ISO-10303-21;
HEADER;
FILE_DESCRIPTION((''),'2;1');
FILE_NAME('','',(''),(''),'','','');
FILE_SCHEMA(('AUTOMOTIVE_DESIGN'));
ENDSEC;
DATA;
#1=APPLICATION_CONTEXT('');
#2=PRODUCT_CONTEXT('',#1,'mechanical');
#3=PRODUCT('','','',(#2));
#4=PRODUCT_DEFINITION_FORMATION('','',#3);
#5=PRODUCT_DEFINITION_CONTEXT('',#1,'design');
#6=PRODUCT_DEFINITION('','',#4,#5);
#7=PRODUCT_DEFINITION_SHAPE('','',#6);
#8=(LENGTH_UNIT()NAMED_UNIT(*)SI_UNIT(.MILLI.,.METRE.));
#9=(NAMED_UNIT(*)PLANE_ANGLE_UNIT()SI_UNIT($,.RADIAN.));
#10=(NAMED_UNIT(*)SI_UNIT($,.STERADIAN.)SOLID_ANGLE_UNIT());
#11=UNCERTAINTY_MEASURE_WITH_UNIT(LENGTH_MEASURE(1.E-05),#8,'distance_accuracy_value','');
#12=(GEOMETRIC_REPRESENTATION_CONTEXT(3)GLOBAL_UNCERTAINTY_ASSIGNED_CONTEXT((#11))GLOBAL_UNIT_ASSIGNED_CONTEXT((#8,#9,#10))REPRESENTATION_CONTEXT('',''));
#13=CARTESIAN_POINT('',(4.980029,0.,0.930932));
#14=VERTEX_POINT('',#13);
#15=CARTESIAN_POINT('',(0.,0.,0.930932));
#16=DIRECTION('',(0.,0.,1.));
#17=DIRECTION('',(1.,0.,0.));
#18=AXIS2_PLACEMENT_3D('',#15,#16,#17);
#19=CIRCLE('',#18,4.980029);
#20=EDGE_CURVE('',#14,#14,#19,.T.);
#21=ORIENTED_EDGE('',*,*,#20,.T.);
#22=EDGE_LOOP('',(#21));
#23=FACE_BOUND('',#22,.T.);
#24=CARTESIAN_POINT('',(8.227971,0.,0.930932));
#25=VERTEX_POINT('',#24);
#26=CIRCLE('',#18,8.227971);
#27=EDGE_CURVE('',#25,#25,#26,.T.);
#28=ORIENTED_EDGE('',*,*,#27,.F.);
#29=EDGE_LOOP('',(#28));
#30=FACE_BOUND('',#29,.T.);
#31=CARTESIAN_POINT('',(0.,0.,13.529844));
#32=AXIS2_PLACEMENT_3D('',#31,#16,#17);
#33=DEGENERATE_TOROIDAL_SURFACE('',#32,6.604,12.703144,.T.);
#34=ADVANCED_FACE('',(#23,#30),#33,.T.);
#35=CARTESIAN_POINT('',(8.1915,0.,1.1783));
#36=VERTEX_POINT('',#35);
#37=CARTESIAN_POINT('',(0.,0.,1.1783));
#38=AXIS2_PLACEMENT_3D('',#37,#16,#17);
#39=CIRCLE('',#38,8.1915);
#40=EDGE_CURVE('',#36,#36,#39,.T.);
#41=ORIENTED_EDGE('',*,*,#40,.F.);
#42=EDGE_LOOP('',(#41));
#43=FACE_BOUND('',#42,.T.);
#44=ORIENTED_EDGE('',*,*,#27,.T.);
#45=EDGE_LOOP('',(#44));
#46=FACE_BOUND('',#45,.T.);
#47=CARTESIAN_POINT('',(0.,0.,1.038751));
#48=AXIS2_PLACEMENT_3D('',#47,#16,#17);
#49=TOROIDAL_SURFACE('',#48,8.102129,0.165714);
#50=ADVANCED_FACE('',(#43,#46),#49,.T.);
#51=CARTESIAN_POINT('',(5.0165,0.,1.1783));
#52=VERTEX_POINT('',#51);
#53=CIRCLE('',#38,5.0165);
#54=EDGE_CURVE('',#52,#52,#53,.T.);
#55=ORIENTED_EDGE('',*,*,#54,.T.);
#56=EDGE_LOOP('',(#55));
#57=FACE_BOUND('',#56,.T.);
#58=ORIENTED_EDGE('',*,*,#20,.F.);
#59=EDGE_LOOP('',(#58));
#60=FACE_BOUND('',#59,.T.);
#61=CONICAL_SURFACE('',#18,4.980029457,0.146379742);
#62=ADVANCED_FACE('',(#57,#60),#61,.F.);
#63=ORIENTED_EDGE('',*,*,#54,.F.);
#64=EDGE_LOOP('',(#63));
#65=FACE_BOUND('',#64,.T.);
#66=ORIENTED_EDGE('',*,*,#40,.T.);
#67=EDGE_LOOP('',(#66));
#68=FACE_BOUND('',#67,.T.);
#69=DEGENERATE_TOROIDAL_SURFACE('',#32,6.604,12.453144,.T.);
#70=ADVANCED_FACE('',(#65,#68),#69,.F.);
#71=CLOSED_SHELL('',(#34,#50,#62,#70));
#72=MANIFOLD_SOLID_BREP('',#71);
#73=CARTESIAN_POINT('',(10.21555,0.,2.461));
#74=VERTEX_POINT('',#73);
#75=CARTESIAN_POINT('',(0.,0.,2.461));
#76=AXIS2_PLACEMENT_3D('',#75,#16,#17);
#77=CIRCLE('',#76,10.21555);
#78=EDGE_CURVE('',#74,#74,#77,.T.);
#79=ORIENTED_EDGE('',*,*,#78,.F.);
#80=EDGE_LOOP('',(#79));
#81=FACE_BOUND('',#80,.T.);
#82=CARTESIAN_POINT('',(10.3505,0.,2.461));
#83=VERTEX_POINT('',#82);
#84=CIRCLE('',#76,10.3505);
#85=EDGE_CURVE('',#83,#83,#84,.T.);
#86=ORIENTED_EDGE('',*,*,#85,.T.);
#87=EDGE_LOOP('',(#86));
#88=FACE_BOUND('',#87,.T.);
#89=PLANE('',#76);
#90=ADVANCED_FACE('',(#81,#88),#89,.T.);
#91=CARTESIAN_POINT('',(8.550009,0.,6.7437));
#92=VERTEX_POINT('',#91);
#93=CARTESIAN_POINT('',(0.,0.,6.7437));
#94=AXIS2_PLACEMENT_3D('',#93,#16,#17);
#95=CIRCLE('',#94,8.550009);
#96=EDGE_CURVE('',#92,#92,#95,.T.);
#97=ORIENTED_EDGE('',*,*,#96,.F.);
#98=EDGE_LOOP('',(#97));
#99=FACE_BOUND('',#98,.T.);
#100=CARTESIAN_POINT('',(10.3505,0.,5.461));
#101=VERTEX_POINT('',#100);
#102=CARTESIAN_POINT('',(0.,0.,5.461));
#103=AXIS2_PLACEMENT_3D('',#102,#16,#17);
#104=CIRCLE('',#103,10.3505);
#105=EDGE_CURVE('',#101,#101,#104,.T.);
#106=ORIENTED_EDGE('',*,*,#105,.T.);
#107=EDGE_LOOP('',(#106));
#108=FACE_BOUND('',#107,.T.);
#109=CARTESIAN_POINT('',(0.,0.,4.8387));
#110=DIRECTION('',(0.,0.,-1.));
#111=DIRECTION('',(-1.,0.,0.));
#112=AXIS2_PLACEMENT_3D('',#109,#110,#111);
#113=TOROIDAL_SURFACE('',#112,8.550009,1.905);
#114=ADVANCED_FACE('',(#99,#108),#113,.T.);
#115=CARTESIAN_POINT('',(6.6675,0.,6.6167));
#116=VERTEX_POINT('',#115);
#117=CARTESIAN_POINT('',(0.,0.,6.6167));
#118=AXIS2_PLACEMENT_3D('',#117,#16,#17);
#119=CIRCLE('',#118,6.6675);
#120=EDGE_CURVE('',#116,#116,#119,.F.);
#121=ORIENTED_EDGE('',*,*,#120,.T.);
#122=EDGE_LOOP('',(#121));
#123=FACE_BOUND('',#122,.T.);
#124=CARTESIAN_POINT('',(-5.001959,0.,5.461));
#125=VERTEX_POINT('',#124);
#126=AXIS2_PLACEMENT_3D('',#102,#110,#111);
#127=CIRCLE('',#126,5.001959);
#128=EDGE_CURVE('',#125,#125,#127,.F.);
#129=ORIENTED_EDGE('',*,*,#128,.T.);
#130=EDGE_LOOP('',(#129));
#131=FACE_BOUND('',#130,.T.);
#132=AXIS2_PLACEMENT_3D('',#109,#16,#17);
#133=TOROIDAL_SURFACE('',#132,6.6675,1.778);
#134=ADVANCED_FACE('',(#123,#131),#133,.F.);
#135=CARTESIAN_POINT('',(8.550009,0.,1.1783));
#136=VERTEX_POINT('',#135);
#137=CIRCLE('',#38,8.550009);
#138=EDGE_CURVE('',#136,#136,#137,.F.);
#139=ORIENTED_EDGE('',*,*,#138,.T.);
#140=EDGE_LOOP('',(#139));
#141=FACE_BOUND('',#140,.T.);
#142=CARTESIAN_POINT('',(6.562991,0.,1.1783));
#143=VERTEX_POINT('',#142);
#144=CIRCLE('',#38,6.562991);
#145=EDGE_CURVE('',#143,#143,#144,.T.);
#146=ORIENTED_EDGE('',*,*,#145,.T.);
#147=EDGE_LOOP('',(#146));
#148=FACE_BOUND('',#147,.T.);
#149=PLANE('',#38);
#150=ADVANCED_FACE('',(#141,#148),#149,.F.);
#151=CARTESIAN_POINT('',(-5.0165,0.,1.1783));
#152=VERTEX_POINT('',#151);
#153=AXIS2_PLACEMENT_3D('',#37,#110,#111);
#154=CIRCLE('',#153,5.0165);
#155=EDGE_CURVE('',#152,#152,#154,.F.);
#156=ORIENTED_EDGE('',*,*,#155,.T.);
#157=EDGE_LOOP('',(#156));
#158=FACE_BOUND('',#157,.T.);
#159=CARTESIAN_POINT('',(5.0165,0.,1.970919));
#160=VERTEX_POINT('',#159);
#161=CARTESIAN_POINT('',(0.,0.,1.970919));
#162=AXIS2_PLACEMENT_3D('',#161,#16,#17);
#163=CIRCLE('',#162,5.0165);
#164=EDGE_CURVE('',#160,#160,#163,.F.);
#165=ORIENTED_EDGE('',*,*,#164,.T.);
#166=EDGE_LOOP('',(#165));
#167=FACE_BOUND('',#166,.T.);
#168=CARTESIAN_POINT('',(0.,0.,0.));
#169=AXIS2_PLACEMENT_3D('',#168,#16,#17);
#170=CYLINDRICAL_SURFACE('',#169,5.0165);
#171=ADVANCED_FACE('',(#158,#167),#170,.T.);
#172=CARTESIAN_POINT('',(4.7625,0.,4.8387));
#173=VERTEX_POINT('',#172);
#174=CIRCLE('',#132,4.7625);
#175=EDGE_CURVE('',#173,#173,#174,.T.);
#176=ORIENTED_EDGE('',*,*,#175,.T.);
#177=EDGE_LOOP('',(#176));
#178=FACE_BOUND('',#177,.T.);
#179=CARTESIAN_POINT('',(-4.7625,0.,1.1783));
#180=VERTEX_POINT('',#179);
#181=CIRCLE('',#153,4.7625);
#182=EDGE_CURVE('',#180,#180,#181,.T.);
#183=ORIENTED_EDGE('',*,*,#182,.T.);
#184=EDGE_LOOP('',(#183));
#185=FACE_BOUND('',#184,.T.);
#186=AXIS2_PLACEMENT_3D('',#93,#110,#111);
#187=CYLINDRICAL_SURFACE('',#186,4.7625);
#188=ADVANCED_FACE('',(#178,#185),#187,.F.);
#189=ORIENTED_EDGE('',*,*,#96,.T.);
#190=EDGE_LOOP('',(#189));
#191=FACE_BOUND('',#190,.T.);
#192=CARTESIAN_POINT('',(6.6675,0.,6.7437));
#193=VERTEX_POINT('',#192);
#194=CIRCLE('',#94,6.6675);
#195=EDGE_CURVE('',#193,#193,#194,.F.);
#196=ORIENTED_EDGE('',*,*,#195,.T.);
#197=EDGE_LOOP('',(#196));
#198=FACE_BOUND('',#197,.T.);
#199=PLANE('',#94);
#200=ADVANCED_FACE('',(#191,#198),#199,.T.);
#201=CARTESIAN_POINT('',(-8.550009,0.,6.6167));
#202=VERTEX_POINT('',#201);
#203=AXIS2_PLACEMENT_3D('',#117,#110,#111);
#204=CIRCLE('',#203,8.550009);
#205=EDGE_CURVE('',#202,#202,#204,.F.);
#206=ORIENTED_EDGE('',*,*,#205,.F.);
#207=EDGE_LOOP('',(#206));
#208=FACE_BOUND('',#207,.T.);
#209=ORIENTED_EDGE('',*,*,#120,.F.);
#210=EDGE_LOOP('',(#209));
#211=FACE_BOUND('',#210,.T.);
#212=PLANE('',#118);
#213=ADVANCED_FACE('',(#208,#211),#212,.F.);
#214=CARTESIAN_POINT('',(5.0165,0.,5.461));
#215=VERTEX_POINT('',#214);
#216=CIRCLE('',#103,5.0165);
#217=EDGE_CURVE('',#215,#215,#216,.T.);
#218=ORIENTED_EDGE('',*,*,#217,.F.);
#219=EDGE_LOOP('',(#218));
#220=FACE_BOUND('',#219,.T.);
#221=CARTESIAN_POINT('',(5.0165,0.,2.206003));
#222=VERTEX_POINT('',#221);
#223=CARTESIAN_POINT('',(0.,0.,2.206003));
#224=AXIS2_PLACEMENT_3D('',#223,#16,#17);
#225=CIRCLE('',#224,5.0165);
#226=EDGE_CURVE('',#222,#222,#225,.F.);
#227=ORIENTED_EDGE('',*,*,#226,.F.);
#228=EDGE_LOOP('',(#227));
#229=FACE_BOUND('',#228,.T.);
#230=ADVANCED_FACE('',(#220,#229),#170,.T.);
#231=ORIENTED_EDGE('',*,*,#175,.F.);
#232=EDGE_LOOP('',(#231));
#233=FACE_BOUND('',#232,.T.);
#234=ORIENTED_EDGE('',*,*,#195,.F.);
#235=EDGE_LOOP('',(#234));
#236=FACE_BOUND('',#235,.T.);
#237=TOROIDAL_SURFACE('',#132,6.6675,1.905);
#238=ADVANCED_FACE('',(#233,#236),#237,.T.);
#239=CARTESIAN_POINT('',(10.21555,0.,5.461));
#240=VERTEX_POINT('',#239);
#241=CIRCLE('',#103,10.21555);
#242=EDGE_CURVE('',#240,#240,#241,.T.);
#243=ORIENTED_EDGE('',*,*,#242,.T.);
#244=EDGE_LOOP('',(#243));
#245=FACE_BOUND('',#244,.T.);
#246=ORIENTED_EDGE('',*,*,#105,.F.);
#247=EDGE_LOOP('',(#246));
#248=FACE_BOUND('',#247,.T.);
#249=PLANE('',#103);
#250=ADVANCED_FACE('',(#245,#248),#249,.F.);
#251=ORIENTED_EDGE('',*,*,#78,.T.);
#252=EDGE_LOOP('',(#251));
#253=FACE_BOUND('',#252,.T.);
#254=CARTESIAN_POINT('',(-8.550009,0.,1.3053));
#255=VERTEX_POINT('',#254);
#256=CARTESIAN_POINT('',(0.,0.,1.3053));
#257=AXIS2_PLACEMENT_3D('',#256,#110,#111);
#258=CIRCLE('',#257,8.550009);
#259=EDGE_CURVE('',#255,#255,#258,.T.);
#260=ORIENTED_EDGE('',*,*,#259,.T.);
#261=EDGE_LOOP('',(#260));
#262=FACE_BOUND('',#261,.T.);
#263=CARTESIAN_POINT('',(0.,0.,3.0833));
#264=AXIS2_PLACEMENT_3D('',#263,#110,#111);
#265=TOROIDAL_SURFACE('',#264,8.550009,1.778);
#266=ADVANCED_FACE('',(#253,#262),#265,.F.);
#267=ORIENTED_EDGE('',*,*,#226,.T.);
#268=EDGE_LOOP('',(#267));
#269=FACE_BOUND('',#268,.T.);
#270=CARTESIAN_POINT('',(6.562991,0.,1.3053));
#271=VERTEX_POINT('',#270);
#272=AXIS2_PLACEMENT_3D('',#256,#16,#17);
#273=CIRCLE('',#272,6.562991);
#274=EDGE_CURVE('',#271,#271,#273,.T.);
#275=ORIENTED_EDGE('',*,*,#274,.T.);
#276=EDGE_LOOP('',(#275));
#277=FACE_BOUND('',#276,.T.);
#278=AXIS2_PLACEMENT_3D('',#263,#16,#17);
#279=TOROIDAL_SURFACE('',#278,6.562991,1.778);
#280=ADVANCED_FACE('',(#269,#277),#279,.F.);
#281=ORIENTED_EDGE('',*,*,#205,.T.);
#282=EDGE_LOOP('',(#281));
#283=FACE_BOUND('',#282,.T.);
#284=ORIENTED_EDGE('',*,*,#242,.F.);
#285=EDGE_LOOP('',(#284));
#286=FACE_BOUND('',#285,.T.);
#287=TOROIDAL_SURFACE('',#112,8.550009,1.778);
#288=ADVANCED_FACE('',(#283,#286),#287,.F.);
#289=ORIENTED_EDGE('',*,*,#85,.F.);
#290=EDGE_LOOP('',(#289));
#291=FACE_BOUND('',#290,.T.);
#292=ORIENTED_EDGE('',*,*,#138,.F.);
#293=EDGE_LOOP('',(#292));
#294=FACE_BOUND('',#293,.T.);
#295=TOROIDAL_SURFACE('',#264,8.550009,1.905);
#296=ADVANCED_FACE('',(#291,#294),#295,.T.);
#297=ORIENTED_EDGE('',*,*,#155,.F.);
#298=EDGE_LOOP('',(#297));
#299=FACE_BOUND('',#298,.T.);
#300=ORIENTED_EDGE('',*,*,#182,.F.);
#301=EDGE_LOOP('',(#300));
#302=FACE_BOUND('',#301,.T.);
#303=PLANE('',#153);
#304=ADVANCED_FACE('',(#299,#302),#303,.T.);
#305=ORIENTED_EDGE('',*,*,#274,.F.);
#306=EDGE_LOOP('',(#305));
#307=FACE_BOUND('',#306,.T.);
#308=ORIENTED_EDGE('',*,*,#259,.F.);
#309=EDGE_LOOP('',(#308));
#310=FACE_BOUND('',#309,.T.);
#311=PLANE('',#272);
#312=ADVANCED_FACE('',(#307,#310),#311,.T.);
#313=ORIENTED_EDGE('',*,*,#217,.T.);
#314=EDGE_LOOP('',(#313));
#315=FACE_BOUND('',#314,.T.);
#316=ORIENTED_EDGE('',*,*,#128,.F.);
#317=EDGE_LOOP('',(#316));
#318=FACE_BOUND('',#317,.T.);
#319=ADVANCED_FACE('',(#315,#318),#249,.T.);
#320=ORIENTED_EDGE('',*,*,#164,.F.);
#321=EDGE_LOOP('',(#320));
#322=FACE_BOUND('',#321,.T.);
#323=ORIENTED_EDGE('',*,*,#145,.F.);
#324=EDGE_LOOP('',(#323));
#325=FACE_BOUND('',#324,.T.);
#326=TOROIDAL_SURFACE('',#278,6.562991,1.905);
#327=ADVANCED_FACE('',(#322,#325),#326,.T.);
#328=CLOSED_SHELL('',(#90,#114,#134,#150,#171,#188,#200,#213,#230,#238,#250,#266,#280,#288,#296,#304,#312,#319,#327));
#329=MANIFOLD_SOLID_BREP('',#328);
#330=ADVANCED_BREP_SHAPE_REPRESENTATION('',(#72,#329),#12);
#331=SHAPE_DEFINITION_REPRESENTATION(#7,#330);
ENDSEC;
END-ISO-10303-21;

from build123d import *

# Parameters (mm, degrees)
SKETCH3_R           = 10.3505
SKETCH3_R_2         = 4.7625
BOSS_EXTRUDE1_DEPTH = 1.2827
BOSS_EXTRUDE2_START = -5.461
SKETCH4_R           = 5.0165
SKETCH4_R_2         = 4.7625
BOSS_EXTRUDE2_DEPTH = 5.461
FILLET1_R           = 1.905
SKETCH5_R           = 10.3505
SKETCH5_R_2         = 4.7625
BOSS_EXTRUDE3_DEPTH = 1.2827
FILLET2_R           = 1.905
SHELL1_T            = -0.127


# Read off the part's stored shape, not the designer's step: Shell2
with BuildPart() as part:
    # Sketch3 → Boss-Extrude1 (new body)
    with BuildSketch(Plane.XY.offset(5.461)):
        Circle(SKETCH3_R)
        Circle(SKETCH3_R_2, mode=Mode.SUBTRACT)
    extrude(amount=BOSS_EXTRUDE1_DEPTH)

    # Sketch4 → Boss-Extrude2 (add)
    with BuildSketch(Plane.XY.offset(5.461).offset(BOSS_EXTRUDE2_START)):
        Circle(SKETCH4_R)
        Circle(SKETCH4_R_2, mode=Mode.SUBTRACT)
    extrude(amount=BOSS_EXTRUDE2_DEPTH)

    # Fillet1
    # the kernel refuses this fillet: 1.905 mm, written as the material it takes off along each edge
    with BuildSketch(Plane(origin=(0, 0, 6.7437), x_dir=(1, 0, 0), z_dir=(0, -1, 0))) as fillet1_piece_1:
        with BuildLine():
            CenterArc((8.550009036, -1.905), FILLET1_R, 19.066580101, 70.933419899)
            Line((8.550009036, 0), (8.550009036, 0.0381))
            Line((8.550009036, 0.0381), (10.3505, 0.0381))
            Line((10.3505, 0.0381), (10.3886, 0))
            ThreePointArc((10.3886, 0), (10.3886, -0.64135), (10.386509819, -1.270254))
            Line((10.386509819, -1.270254), (10.3505, -1.2827))
        make_face()
    revolve(axis=Axis((0, 0, 6.7437), (0, 0, 1)), mode=Mode.SUBTRACT)
    with BuildSketch(Plane(origin=(0, 0, 6.7437), x_dir=(1, 0, 0), z_dir=(0, -1, 0))) as fillet1_piece_2:
        with BuildLine():
            CenterArc((4.7625 + FILLET1_R, -FILLET1_R), FILLET1_R, 90, 90)
            Line((4.7625, -FILLET1_R), (4.7625 - FILLET1_R * 0.02, -FILLET1_R))
            Line((4.7625 - FILLET1_R * 0.02, -FILLET1_R), (4.7625 - FILLET1_R * 0.02, FILLET1_R * 0.02))
            Line((4.7625 - FILLET1_R * 0.02, FILLET1_R * 0.02), (4.7625 + FILLET1_R, FILLET1_R * 0.02))
            Line((4.7625 + FILLET1_R, FILLET1_R * 0.02), (4.7625 + FILLET1_R, 0))
        make_face()
    revolve(axis=Axis((0, 0, 6.7437), (0, 0, 1)), mode=Mode.SUBTRACT)

    # Shell2 outline → Shell2 (revolve, cut)
    with BuildSketch(Plane.XZ):
        with BuildLine():
            ThreePointArc((6.6675, 6.6167), (5.653884047, 6.299476061), (5.001959034, 5.461))
            Line((5.001959034, 5.461), (10.215550003, 5.461))
            ThreePointArc((10.215550003, 5.461), (9.563624989, 6.299476061), (8.550009036, 6.6167))
            Line((8.550009036, 6.6167), (6.6675, 6.6167))
        make_face()
    revolve(axis=Axis((0, 0, 0), (0, 0, 1)), mode=Mode.SUBTRACT)

    # SurfaceCut1
    split(bisect_by=Plane(origin=(0, 0, 1.178299904), x_dir=(-1, 0, 0), z_dir=(0, 0, -1)), keep=Keep.BOTTOM)



with BuildPart() as body_2:
    # Sketch5 → Boss-Extrude3 (new body)
    with BuildSketch(Plane.XY.offset(2.460999904)):
        Circle(SKETCH5_R)
        Circle(SKETCH5_R_2, mode=Mode.SUBTRACT)
    extrude(amount=-BOSS_EXTRUDE3_DEPTH)

    # Fillet2
    # the kernel refuses this fillet: 1.905 mm, written as the material it takes off along each edge
    with BuildSketch(Plane(origin=(0, 0, 1.178299904), x_dir=(1, 0, 0), z_dir=(0, -1, 0))) as fillet2_piece_1:
        with BuildLine():
            CenterArc((8.550009036, 1.905), FILLET2_R, 270, 70.933419899)
            Line((8.550009036, 0), (8.550009036, -0.0381))
            Line((8.550009036, -0.0381), (10.3505, -0.0381))
            Line((10.3505, -0.0381), (10.3886, 0))
            ThreePointArc((10.3886, 0), (10.3886, 0.64135), (10.386509819, 1.270254))
            Line((10.386509819, 1.270254), (10.3505, 1.2827))
        make_face()
    revolve(axis=Axis((0, 0, 1.178299904), (0, 0, 1)), mode=Mode.SUBTRACT)
    with BuildSketch(Plane(origin=(0, 0, 1.178299904), x_dir=(1, 0, 0), z_dir=(0, -1, 0))) as fillet2_piece_2:
        with BuildLine():
            CenterArc((6.562990964, 1.905), FILLET2_R, 199.066580101, 70.933419899)
            Line((6.562990964, 0), (6.562990964, -0.0381))
            Line((6.562990964, -0.0381), (4.7625, -0.0381))
            Line((4.7625, -0.0381), (4.7244, 0))
            ThreePointArc((4.7244, 0), (4.7244, 0.64135), (4.726490181, 1.270254))
            Line((4.726490181, 1.270254), (4.7625, 1.2827))
        make_face()
    revolve(axis=Axis((0, 0, 1.178299904), (0, 0, 1)), mode=Mode.SUBTRACT)

    # Shell1
    shell1_openings = [body_2.faces().sort_by_distance(p)[0] for p in [
        (-10.05774365, 0, 2.460999904),
    ]]
    offset(amount=SHELL1_T, openings=shell1_openings, kind=Kind.INTERSECTION)


with BuildPart() as part_1:
    add(part.part)

    add(body_2.part)  # Revolve4 merges body 2
    # Sketch11 → Revolve4 (revolve)
    with BuildSketch(Plane(origin=(0, 0, 0), x_dir=(1, 0, 0), z_dir=(0, 1, 0))):
        with BuildLine():
            Line((5.0165, -1.178299904), (4.980029457, -0.930931764))
            ThreePointArc((4.980029457, -0.930931764), (6.604, -0.826699904), (8.227970543, -0.930931764))
            ThreePointArc((8.227970543, -0.930931764), (8.266070543, -1.062921584), (8.1915, -1.178299904))
            ThreePointArc((8.1915, -1.178299904), (6.604, -1.076699904), (5.0165, -1.178299904))
        make_face()
    revolve(axis=Axis((0, 0, 1.178299904), (0, 0, -1)))


solid = part_1.part
